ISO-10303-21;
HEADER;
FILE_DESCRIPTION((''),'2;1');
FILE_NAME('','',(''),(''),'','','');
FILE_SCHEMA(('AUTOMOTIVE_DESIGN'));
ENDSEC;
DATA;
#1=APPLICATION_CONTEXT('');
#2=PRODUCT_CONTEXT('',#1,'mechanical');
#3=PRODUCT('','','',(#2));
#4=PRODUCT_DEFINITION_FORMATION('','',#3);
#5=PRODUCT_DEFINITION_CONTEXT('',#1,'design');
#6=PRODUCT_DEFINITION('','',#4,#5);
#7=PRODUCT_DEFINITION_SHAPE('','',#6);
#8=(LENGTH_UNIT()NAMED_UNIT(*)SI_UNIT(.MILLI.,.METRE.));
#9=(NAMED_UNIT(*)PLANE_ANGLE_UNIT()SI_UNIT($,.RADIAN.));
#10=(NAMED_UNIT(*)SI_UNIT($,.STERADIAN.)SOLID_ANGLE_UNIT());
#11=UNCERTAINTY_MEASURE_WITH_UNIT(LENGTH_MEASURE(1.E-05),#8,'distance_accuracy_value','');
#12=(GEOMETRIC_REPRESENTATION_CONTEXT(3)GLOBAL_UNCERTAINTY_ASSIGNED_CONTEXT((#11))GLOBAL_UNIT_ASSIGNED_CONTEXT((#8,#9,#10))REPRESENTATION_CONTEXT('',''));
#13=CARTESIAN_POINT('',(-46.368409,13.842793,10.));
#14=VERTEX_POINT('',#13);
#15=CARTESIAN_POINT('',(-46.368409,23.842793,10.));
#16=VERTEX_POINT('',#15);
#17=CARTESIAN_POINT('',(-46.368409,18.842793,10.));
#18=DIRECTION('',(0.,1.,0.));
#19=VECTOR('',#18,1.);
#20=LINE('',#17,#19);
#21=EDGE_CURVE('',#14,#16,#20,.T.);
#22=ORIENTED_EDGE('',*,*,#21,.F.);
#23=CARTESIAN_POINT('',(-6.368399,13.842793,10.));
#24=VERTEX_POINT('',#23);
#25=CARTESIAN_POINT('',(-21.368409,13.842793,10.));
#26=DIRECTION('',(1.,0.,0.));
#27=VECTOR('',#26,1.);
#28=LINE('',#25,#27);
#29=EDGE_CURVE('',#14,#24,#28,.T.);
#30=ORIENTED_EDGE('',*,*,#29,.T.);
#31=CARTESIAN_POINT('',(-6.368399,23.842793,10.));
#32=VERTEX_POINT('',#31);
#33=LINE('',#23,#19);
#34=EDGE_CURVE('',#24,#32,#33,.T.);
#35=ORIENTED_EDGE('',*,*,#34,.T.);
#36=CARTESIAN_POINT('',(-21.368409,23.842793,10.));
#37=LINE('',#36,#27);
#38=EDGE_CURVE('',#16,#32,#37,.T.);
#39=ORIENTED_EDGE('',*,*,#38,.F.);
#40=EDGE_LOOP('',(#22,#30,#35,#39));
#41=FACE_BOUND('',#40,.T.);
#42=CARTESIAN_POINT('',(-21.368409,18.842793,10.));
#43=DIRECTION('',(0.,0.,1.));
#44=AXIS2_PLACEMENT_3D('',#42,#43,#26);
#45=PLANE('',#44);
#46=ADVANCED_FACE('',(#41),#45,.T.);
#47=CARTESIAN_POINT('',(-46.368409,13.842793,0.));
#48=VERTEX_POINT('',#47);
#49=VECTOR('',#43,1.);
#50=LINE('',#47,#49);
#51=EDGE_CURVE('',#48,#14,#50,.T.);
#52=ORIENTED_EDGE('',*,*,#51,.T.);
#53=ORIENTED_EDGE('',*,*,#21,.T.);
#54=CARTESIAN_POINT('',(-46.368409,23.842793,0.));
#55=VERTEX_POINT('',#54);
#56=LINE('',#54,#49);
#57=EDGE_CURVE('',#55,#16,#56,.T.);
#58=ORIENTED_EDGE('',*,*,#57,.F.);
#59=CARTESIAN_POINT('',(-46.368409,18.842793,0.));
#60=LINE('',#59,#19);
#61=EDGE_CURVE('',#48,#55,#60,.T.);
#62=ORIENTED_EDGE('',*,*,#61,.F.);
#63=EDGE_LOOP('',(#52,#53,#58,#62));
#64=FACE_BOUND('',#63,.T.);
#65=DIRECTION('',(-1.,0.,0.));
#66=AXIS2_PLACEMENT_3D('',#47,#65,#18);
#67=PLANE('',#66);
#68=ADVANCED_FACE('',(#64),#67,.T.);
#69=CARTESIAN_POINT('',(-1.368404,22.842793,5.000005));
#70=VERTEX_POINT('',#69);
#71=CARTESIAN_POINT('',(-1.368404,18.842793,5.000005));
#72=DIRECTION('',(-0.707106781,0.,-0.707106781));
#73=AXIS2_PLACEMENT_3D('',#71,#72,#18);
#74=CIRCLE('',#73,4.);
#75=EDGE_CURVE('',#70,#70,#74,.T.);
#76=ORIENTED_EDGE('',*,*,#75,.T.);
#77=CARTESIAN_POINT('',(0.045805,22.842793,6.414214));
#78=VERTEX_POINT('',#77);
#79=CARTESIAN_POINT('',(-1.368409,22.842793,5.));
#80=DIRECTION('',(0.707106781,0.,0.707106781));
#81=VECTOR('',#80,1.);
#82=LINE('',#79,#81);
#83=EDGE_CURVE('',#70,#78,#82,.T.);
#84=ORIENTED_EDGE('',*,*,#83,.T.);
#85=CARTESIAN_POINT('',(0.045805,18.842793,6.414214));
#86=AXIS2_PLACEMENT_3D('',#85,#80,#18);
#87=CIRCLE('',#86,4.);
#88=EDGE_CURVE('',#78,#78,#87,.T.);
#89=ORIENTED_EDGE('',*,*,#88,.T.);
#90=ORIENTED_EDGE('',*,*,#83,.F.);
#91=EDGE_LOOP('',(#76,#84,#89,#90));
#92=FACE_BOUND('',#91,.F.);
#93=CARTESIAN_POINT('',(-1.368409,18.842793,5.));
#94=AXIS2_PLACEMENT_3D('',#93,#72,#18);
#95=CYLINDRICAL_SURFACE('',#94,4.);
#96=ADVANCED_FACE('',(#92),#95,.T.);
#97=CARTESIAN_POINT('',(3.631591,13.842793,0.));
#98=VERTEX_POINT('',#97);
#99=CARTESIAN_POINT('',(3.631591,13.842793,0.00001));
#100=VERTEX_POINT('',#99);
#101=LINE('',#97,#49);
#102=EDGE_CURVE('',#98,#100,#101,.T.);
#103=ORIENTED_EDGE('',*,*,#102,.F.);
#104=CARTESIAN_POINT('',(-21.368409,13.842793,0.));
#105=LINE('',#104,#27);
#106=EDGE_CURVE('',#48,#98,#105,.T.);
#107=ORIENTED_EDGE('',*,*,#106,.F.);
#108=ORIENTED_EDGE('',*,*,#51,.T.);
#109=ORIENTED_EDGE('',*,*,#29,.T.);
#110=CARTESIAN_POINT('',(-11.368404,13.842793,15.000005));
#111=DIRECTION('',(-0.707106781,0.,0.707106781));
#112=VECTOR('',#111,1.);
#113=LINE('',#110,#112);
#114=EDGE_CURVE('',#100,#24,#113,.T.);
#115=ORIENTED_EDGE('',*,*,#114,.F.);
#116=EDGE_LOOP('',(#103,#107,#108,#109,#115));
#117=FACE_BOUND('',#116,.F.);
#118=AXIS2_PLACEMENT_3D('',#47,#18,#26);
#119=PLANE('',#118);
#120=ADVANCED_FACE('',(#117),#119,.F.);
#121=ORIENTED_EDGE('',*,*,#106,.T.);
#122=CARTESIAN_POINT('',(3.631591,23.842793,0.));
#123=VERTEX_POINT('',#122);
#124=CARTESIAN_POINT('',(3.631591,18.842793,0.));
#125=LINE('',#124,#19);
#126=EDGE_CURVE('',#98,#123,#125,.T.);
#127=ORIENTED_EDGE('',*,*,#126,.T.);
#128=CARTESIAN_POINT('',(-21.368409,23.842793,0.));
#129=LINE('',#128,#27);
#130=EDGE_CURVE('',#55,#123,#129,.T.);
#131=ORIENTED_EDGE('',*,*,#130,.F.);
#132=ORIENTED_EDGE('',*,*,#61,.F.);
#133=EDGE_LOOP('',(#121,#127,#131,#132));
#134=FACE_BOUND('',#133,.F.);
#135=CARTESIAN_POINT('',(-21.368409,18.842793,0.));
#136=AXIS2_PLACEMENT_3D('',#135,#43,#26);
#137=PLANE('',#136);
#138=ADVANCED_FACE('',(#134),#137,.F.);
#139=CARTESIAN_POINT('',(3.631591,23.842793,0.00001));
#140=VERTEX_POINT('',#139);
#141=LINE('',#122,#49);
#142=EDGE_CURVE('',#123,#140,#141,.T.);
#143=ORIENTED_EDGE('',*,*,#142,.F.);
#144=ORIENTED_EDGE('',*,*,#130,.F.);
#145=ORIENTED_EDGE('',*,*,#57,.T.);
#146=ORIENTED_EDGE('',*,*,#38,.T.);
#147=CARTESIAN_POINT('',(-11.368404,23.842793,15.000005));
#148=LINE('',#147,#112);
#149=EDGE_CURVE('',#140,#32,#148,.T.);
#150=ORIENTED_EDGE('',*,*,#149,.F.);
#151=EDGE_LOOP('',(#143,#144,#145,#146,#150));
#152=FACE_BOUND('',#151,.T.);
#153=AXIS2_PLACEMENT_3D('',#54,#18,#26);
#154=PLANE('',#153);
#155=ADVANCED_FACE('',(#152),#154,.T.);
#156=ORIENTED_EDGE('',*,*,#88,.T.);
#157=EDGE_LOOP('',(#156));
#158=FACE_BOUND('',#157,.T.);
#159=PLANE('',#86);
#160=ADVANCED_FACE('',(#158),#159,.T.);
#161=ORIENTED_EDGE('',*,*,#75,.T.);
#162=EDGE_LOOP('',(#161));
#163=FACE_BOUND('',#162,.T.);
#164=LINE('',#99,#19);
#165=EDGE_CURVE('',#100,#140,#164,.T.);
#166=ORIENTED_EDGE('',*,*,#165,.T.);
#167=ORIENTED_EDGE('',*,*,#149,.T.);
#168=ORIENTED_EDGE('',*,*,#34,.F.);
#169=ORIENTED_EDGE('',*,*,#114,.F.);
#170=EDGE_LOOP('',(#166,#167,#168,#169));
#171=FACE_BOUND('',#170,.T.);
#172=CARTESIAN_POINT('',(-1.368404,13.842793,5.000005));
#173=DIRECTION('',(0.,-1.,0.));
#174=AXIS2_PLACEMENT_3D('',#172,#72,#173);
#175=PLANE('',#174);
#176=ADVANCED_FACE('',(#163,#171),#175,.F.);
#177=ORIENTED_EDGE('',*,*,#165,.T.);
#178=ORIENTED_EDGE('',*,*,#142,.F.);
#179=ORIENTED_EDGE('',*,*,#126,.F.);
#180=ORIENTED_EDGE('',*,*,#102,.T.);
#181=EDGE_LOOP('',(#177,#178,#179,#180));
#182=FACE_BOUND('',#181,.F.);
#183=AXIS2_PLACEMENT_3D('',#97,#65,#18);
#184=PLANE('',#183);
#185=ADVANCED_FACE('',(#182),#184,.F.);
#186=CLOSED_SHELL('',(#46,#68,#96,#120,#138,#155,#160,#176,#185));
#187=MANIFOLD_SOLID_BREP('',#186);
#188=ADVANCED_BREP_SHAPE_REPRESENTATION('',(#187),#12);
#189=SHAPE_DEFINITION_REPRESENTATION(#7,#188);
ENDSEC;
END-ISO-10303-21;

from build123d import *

# Parameters (mm, degrees)
F0_W     = 50
F0_H     = 10
F1_DEPTH = 10
F2_SIZE  = 9.99999
F3_R     = 4
F4_DEPTH = 2


# Not quite as in the source:
# - a fillet or chamfer is up to 0.001 mm smaller than in the source, because OpenCascade refuses the exact size


with BuildPart() as f1:
    # F0 (on Top) → F1 (new body)
    with BuildSketch(Plane.XY):
        with Locations((-21.3684089482, 18.842792958)):
            Rectangle(F0_W, F0_H)
    extrude(amount=F1_DEPTH)

    # F2 (size 10 in the source; OpenCascade refuses exactly that, so slightly less here)
    f2_edges = [f1.edges().sort_by_distance(p)[0] for p in [
        (3.631591, 18.842793, 10),
    ]]
    chamfer(f2_edges, length=F2_SIZE)

    # F3 (on face) → F4 (join)
    with BuildSketch(Plane(origin=(1.8157955259, 0, 1.8157955259), x_dir=(0, 1, 0), z_dir=(0.7071067812, 0, 0.7071067812))):
        with Locations((18.842792958, 4.5031451526)):
            Circle(F3_R)
    extrude(amount=F4_DEPTH)


solid = f1.part
